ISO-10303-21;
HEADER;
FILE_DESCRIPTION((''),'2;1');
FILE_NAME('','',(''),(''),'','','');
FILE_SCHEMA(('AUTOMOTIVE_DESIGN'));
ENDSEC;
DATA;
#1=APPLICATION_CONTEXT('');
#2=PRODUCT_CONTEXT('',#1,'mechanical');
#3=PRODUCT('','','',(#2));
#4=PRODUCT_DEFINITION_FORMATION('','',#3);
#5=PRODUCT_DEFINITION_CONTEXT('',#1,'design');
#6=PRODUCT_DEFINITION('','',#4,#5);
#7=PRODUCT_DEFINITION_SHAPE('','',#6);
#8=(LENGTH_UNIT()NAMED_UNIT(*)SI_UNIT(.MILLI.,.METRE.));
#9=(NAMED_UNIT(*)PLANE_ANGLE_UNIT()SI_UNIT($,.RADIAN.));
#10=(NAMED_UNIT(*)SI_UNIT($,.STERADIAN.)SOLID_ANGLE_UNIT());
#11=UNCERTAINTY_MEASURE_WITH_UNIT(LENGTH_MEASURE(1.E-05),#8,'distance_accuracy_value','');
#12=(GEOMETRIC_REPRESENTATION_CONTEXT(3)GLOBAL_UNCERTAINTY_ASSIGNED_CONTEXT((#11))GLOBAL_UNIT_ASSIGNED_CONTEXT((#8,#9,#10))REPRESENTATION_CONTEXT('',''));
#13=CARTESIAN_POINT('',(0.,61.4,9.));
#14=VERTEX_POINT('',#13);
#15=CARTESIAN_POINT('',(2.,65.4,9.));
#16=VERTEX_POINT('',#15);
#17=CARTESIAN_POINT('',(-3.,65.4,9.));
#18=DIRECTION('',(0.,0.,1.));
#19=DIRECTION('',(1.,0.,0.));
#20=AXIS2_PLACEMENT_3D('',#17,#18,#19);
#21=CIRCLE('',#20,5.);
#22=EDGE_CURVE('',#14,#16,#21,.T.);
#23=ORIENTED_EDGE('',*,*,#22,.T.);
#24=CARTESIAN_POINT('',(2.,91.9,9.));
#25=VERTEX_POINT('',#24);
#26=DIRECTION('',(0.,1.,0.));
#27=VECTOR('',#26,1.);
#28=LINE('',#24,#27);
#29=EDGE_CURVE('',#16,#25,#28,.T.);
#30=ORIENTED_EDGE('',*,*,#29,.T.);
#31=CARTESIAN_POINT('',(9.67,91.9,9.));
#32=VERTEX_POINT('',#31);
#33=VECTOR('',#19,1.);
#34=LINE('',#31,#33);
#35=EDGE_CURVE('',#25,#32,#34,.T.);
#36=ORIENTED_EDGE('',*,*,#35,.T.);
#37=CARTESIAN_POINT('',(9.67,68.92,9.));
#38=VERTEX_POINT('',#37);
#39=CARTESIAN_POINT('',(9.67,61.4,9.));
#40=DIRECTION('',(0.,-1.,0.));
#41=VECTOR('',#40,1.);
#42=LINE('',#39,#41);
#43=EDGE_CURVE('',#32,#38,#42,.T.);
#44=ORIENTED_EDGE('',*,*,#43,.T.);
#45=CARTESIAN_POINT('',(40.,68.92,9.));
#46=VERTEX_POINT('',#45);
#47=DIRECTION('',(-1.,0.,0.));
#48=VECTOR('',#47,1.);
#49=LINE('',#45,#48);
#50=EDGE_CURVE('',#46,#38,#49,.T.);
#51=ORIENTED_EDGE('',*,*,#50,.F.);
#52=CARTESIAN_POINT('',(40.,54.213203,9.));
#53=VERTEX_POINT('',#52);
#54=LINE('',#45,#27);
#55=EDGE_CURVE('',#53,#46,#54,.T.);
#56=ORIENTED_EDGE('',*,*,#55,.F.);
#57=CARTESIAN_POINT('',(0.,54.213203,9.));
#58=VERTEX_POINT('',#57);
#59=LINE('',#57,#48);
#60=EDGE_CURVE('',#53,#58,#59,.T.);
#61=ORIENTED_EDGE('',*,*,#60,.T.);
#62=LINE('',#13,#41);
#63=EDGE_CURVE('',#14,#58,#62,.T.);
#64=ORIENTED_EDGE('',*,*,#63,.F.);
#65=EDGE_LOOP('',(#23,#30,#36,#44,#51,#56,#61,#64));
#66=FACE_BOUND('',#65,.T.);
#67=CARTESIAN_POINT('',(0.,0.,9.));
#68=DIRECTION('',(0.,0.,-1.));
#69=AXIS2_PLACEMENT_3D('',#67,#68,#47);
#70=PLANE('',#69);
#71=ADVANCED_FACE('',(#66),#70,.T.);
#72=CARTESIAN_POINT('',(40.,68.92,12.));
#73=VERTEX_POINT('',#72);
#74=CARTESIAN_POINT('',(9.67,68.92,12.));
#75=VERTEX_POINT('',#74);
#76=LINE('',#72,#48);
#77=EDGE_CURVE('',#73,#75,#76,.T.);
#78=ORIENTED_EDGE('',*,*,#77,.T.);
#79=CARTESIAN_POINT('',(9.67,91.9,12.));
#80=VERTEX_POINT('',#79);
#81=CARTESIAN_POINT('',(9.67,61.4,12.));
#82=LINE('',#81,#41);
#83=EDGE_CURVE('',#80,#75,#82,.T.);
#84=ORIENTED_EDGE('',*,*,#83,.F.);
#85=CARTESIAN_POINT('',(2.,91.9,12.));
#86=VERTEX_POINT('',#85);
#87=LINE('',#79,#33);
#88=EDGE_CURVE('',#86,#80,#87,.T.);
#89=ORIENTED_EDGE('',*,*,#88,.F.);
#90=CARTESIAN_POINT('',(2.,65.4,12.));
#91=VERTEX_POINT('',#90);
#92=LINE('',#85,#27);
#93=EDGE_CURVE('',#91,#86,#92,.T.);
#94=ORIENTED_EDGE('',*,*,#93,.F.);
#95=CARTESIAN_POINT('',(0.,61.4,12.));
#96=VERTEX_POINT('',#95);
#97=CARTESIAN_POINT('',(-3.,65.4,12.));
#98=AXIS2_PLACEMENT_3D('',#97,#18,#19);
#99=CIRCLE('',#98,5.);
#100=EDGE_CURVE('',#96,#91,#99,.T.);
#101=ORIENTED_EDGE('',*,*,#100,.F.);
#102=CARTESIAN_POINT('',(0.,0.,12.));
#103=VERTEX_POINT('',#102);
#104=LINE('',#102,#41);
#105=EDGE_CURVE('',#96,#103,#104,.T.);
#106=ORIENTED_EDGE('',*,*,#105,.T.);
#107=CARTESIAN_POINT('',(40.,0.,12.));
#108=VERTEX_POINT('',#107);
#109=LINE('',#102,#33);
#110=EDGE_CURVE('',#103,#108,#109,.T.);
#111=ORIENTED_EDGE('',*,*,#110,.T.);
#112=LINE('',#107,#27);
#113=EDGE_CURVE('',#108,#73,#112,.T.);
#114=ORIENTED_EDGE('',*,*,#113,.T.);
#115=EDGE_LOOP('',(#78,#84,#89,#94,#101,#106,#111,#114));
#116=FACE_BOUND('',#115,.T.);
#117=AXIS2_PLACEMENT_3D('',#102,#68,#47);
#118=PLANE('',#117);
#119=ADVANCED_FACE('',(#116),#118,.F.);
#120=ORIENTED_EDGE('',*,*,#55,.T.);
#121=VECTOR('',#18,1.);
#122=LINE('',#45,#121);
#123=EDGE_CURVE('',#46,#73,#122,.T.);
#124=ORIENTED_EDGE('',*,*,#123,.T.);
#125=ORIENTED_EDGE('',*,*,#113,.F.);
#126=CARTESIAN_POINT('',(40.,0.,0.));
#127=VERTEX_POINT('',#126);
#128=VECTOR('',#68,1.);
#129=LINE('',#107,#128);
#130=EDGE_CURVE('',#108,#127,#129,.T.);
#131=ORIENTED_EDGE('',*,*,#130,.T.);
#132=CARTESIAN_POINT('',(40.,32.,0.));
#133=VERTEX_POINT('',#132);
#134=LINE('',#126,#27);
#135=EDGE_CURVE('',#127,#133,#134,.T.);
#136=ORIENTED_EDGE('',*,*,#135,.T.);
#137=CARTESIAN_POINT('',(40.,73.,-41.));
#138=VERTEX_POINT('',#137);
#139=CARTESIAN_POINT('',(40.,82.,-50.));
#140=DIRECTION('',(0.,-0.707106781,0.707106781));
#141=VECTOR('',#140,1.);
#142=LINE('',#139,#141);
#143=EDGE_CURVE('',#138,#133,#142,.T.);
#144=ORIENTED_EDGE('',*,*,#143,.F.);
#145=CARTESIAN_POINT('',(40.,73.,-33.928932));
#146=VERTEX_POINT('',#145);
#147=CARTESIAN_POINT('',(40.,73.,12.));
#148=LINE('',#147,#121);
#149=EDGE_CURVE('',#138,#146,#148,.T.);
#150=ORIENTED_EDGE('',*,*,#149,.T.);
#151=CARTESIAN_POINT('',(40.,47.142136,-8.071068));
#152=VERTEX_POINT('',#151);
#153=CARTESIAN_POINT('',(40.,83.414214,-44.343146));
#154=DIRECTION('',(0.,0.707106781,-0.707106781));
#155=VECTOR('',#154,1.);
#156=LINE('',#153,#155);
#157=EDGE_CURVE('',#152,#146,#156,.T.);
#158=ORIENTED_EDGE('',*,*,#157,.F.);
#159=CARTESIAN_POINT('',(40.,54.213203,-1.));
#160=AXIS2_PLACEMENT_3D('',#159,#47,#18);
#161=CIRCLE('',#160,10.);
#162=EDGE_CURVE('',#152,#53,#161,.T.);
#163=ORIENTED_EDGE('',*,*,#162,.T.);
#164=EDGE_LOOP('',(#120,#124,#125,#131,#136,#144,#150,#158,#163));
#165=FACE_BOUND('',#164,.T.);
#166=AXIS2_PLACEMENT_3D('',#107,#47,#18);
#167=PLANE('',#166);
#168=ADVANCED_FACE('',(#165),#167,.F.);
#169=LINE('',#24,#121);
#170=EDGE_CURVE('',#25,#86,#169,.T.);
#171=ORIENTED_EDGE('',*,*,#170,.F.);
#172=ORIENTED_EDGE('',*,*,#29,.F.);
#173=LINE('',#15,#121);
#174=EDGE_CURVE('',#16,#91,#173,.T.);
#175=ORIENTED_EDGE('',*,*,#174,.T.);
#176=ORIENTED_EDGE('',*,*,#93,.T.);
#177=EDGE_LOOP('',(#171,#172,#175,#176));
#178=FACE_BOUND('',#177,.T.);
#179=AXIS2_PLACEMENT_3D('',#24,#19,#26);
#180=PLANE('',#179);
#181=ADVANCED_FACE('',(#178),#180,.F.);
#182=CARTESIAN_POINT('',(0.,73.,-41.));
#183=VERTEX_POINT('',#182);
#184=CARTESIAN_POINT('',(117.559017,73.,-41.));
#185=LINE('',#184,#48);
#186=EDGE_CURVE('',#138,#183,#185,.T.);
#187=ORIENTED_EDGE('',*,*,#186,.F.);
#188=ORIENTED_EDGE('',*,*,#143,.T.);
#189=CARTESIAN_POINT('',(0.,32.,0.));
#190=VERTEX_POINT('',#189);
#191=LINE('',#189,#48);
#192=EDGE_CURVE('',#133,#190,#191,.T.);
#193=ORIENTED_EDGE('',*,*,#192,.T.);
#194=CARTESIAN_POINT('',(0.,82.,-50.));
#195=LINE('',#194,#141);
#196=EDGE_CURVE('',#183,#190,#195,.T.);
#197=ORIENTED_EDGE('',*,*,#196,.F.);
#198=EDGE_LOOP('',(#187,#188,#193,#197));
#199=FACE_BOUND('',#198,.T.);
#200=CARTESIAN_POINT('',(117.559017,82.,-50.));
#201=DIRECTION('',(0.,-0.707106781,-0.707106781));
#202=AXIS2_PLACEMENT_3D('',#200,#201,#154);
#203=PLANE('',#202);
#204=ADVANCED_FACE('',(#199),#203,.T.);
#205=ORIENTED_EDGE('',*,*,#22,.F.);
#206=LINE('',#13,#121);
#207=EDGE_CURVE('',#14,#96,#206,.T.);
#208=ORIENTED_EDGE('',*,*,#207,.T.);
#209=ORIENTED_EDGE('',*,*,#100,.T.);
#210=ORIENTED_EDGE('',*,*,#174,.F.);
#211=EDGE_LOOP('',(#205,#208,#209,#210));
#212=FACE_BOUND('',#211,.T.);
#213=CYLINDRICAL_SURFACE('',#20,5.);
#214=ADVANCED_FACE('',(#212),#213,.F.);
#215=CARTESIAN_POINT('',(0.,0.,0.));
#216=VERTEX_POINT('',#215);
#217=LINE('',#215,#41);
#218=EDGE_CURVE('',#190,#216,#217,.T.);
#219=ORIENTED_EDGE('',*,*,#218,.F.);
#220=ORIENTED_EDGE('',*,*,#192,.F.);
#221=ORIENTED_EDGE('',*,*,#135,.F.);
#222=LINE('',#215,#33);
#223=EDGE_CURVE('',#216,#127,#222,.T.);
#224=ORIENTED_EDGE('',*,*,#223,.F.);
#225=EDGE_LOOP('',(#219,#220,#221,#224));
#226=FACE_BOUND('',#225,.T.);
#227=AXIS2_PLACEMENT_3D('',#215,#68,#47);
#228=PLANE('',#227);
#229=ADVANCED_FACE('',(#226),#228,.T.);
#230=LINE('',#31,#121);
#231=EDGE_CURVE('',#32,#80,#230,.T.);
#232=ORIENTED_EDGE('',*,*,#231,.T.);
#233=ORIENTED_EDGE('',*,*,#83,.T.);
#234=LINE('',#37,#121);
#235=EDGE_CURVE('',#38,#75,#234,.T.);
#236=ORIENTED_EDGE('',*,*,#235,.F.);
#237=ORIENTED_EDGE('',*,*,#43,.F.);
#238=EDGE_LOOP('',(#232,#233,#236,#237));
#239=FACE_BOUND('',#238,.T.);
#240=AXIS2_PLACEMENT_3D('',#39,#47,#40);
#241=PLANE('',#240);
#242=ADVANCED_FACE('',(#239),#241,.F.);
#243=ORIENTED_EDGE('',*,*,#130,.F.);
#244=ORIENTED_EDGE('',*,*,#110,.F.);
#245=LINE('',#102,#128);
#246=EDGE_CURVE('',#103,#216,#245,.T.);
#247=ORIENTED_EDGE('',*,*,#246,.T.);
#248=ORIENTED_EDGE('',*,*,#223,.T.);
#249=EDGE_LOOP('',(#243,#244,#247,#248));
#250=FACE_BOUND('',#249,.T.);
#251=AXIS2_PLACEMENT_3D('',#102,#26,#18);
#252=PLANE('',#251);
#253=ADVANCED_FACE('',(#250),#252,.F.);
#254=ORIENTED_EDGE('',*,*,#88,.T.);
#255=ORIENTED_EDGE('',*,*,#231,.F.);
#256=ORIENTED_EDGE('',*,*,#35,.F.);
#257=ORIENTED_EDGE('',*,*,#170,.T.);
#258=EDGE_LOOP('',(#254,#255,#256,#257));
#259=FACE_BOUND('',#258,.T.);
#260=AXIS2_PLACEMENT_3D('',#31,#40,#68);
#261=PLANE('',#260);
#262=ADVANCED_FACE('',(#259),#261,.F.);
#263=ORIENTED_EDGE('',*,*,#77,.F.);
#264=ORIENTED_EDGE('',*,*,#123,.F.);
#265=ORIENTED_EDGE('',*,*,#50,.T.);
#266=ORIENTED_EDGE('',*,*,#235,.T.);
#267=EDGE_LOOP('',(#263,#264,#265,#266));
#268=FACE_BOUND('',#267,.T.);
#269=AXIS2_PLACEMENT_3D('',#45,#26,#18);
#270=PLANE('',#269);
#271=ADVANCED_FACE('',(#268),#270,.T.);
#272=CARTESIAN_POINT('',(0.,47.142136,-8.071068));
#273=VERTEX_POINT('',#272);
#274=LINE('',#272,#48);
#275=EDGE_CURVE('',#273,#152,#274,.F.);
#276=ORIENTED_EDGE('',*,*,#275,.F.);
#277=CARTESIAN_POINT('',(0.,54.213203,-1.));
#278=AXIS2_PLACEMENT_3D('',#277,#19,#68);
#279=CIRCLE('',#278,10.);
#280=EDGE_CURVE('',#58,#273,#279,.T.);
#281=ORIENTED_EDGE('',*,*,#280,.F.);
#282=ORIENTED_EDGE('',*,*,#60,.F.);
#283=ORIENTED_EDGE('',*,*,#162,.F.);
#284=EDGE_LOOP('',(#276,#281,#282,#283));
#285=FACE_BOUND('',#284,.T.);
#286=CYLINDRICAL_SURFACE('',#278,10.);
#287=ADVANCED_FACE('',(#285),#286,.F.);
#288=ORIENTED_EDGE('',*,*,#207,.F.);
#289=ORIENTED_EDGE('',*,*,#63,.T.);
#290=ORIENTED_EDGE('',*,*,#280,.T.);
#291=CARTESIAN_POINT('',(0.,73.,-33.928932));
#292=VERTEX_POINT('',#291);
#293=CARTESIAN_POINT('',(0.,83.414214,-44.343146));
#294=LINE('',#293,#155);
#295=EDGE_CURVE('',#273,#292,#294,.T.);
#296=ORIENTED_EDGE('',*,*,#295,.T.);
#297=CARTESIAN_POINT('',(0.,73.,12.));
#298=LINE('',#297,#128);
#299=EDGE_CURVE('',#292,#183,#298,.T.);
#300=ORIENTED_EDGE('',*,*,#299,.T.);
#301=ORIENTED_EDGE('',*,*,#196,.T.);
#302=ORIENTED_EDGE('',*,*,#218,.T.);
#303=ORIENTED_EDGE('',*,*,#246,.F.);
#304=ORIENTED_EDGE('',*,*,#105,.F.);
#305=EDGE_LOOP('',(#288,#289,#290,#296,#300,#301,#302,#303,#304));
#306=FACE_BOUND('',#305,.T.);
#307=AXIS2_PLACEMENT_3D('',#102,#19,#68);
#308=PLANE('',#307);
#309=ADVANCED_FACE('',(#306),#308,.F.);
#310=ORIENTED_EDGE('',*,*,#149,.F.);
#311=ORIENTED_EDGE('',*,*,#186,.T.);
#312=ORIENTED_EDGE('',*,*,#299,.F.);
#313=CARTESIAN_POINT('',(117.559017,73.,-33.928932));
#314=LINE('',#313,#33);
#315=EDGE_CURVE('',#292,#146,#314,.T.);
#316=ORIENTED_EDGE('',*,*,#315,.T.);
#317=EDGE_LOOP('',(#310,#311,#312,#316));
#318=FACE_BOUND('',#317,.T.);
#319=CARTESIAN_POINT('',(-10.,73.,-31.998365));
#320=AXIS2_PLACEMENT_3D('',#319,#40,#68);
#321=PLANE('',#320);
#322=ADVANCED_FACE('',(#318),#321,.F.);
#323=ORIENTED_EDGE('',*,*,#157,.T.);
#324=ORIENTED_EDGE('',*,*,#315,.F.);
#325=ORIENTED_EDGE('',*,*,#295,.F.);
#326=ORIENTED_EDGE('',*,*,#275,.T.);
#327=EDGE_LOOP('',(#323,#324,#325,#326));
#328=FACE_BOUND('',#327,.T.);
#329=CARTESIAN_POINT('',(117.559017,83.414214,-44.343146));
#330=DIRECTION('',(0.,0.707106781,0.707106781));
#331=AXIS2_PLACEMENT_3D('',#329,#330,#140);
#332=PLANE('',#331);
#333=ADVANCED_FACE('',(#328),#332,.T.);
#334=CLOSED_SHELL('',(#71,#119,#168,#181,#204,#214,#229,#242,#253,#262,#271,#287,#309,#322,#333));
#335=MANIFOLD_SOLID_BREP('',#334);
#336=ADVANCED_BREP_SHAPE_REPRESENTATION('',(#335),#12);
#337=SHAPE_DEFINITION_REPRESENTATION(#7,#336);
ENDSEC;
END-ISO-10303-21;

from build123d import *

# Parameters (mm, degrees)
SKETCH_1_W          = 40
SKETCH_1_H          = 32
EXTRUDE_1_DEPTH     = 12
EXTRUDE_2_DEPTH     = 3
FILLET_1_R          = 10
EXTRUDE_3_DEPTH     = 40
FILLET_2_R          = 10
CUT_EXTRUDE_4_DEPTH = 106.156697477
EXTRUDE_4_DEPTH     = 10
EXTRUDE_5_DEPTH     = 10
EXTRUDE_6_DEPTH     = 10
EXTRUDE_7_DEPTH     = 10
FILLET_3_R          = 3
EXTRUDE_8_DEPTH     = 3
SKETCH_11_W         = 29.594040462
SKETCH_11_H         = 15.509477318
CUT_EXTRUDE_5_DEPTH = 125.135450215


with BuildPart() as part:
    # Эскиз1 → Бобышка-Вытянуть1 (new body)
    with BuildSketch(Plane.XY):
        with Locations((20, 16)):
            Rectangle(SKETCH_1_W, SKETCH_1_H)
    extrude(amount=EXTRUDE_1_DEPTH)

    # Эскиз2 → Бобышка-Вытянуть2 (add)
    with BuildSketch(Plane.XY.offset(12)):
        Polygon((40, 68.92), (9.67, 68.92), (9.67, 61.4), (0, 61.4), (0, 32), (9.67, 32), (40, 32), align=None)
    extrude(amount=-EXTRUDE_2_DEPTH)

    # Скругление1
    # the kernel refuses this fillet: 10 mm, written as the material it adds along each edge
    with BuildSketch(Plane(origin=(0, 32, 9), x_dir=(0, 1, 0), z_dir=(1, 0, 0))) as fillet_1_piece_1:
        with BuildLine():
            CenterArc((9.949874371, -10), FILLET_1_R, 90, 84.260829523)
            Line((0, -9), (-0.198997487, -8.98))
            ThreePointArc((-0.198997487, -8.98), (-0.2, -4.5), (-0.2, 0))
            Line((-0.2, 0), (0, 0.2))
            Line((0, 0.2), (9.949874371, 0.2))
            Line((9.949874371, 0.2), (9.949874371, 0))
        make_face()
    extrude(amount=40)

    # Эскиз3 → Бобышка-Вытянуть3 (add)
    with BuildSketch(Plane.ZY):
        Polygon((-50, 82), (0, 32), (0.953231177, 30.366676535), (6.580561568, 32.490506244), (-44.343145751, 83.414213562), align=None)
    extrude(amount=-EXTRUDE_3_DEPTH)

    # Скругление2
    # the kernel refuses this fillet: 10 mm, written as the material it adds along each edge
    with BuildSketch(Plane(origin=(40, 34.002081727, 5.068986084), x_dir=(0, 0.9816056191455192, 0.19091990064406986), z_dir=(-1, 0, 0))) as fillet_2_piece_1:
        with BuildLine():
            CenterArc((18.680660418, 9.816056191), FILLET_2_R, 146.006473408, 135)
            Line((10.389652956, 15.407048525), (9.56055221, 15.966147758))
            Line((9.56055221, 15.966147758), (-0.829100746, 0.559099233))
            Line((-0.829100746, 0.559099233), (-0.66429077, -0.747474262))
            ThreePointArc((-0.66429077, -0.747474262), (8.743026606, -3.322919186), (20.780779325, -0.981605619))
            Line((20.780779325, -0.981605619), (20.589859424, 0))
        make_face()
    extrude(amount=40)

    # Эскиз5 → Вырез-Вытянуть4 (cut, through all)
    with BuildSketch(Plane(origin=(40, 0, 0), x_dir=(0, 0, -1), z_dir=(1, 0, 0))):
        Polygon((50, 82), (39.176517875, 82), (40.76887279, 85.052981815), (48.441128294, 85.535513608), align=None)
    extrude(amount=-CUT_EXTRUDE_4_DEPTH, mode=Mode.SUBTRACT)

    # Эскиз6 → Бобышка-Вытянуть4 (add)
    with BuildSketch(Plane(origin=(40, 0, 0), x_dir=(0, 0, -1), z_dir=(1, 0, 0))):
        Polygon((34.928932188, 74), (42, 74), (50, 82), (42.928932188, 82), align=None)
    extrude(amount=EXTRUDE_4_DEPTH)

    # Эскиз7 → Бобышка-Вытянуть5 (add)
    with BuildSketch(Plane.ZY):
        Polygon((-42, 74), (-34.928932188, 74), (-42.928932188, 82), (-50, 82), align=None)
    extrude(amount=EXTRUDE_5_DEPTH)

    # Эскиз8 → Бобышка-Вытянуть6 (add)
    with BuildSketch(Plane.ZY.offset(10)):
        Polygon((-42, 74), (-58, 74), (-58, 82), (-50, 82), align=None)
    extrude(amount=-EXTRUDE_6_DEPTH)

    # Эскиз9 → Бобышка-Вытянуть7 (add)
    with BuildSketch(Plane(origin=(50, 0, 0), x_dir=(0, 0, -1), z_dir=(1, 0, 0))):
        Polygon((42, 74), (58, 74), (58, 82), (50, 82), align=None)
    extrude(amount=-EXTRUDE_7_DEPTH)

    # Скругление3
    fillet_3_edges = [part.edges().sort_by_distance(p)[0] for p in [
        (0, 78, -46),
        (40, 78, -46),
    ]]
    fillet(fillet_3_edges, radius=FILLET_3_R)

    # Эскиз10 → Бобышка-Вытянуть8 (add)
    with BuildSketch(Plane(origin=(0, 0, 12), x_dir=(-1, 0, 0), z_dir=(0, 0, -1))):
        with BuildLine():
            Line((-9.67, 91.9), (-2, 91.9))
            Line((-2, 91.9), (-2, 65.4))
            ThreePointArc((-2, 65.4), (-1.472135955, 63.163932023), (0, 61.4))
            Line((0, 61.4), (-9.67, 61.4))
            Line((-9.67, 61.4), (-9.67, 91.9))
        make_face()
    extrude(amount=EXTRUDE_8_DEPTH)

    # Эскиз11 → Вырез-Вытянуть5 (cut, through all)
    with BuildSketch(Plane(origin=(50, 0, 0), x_dir=(0, 0, -1), z_dir=(1, 0, 0))):
        with Locations((46.795384827, 80.754738659)):
            Rectangle(SKETCH_11_W, SKETCH_11_H)
    extrude(amount=-CUT_EXTRUDE_5_DEPTH, mode=Mode.SUBTRACT)


solid = part.part
